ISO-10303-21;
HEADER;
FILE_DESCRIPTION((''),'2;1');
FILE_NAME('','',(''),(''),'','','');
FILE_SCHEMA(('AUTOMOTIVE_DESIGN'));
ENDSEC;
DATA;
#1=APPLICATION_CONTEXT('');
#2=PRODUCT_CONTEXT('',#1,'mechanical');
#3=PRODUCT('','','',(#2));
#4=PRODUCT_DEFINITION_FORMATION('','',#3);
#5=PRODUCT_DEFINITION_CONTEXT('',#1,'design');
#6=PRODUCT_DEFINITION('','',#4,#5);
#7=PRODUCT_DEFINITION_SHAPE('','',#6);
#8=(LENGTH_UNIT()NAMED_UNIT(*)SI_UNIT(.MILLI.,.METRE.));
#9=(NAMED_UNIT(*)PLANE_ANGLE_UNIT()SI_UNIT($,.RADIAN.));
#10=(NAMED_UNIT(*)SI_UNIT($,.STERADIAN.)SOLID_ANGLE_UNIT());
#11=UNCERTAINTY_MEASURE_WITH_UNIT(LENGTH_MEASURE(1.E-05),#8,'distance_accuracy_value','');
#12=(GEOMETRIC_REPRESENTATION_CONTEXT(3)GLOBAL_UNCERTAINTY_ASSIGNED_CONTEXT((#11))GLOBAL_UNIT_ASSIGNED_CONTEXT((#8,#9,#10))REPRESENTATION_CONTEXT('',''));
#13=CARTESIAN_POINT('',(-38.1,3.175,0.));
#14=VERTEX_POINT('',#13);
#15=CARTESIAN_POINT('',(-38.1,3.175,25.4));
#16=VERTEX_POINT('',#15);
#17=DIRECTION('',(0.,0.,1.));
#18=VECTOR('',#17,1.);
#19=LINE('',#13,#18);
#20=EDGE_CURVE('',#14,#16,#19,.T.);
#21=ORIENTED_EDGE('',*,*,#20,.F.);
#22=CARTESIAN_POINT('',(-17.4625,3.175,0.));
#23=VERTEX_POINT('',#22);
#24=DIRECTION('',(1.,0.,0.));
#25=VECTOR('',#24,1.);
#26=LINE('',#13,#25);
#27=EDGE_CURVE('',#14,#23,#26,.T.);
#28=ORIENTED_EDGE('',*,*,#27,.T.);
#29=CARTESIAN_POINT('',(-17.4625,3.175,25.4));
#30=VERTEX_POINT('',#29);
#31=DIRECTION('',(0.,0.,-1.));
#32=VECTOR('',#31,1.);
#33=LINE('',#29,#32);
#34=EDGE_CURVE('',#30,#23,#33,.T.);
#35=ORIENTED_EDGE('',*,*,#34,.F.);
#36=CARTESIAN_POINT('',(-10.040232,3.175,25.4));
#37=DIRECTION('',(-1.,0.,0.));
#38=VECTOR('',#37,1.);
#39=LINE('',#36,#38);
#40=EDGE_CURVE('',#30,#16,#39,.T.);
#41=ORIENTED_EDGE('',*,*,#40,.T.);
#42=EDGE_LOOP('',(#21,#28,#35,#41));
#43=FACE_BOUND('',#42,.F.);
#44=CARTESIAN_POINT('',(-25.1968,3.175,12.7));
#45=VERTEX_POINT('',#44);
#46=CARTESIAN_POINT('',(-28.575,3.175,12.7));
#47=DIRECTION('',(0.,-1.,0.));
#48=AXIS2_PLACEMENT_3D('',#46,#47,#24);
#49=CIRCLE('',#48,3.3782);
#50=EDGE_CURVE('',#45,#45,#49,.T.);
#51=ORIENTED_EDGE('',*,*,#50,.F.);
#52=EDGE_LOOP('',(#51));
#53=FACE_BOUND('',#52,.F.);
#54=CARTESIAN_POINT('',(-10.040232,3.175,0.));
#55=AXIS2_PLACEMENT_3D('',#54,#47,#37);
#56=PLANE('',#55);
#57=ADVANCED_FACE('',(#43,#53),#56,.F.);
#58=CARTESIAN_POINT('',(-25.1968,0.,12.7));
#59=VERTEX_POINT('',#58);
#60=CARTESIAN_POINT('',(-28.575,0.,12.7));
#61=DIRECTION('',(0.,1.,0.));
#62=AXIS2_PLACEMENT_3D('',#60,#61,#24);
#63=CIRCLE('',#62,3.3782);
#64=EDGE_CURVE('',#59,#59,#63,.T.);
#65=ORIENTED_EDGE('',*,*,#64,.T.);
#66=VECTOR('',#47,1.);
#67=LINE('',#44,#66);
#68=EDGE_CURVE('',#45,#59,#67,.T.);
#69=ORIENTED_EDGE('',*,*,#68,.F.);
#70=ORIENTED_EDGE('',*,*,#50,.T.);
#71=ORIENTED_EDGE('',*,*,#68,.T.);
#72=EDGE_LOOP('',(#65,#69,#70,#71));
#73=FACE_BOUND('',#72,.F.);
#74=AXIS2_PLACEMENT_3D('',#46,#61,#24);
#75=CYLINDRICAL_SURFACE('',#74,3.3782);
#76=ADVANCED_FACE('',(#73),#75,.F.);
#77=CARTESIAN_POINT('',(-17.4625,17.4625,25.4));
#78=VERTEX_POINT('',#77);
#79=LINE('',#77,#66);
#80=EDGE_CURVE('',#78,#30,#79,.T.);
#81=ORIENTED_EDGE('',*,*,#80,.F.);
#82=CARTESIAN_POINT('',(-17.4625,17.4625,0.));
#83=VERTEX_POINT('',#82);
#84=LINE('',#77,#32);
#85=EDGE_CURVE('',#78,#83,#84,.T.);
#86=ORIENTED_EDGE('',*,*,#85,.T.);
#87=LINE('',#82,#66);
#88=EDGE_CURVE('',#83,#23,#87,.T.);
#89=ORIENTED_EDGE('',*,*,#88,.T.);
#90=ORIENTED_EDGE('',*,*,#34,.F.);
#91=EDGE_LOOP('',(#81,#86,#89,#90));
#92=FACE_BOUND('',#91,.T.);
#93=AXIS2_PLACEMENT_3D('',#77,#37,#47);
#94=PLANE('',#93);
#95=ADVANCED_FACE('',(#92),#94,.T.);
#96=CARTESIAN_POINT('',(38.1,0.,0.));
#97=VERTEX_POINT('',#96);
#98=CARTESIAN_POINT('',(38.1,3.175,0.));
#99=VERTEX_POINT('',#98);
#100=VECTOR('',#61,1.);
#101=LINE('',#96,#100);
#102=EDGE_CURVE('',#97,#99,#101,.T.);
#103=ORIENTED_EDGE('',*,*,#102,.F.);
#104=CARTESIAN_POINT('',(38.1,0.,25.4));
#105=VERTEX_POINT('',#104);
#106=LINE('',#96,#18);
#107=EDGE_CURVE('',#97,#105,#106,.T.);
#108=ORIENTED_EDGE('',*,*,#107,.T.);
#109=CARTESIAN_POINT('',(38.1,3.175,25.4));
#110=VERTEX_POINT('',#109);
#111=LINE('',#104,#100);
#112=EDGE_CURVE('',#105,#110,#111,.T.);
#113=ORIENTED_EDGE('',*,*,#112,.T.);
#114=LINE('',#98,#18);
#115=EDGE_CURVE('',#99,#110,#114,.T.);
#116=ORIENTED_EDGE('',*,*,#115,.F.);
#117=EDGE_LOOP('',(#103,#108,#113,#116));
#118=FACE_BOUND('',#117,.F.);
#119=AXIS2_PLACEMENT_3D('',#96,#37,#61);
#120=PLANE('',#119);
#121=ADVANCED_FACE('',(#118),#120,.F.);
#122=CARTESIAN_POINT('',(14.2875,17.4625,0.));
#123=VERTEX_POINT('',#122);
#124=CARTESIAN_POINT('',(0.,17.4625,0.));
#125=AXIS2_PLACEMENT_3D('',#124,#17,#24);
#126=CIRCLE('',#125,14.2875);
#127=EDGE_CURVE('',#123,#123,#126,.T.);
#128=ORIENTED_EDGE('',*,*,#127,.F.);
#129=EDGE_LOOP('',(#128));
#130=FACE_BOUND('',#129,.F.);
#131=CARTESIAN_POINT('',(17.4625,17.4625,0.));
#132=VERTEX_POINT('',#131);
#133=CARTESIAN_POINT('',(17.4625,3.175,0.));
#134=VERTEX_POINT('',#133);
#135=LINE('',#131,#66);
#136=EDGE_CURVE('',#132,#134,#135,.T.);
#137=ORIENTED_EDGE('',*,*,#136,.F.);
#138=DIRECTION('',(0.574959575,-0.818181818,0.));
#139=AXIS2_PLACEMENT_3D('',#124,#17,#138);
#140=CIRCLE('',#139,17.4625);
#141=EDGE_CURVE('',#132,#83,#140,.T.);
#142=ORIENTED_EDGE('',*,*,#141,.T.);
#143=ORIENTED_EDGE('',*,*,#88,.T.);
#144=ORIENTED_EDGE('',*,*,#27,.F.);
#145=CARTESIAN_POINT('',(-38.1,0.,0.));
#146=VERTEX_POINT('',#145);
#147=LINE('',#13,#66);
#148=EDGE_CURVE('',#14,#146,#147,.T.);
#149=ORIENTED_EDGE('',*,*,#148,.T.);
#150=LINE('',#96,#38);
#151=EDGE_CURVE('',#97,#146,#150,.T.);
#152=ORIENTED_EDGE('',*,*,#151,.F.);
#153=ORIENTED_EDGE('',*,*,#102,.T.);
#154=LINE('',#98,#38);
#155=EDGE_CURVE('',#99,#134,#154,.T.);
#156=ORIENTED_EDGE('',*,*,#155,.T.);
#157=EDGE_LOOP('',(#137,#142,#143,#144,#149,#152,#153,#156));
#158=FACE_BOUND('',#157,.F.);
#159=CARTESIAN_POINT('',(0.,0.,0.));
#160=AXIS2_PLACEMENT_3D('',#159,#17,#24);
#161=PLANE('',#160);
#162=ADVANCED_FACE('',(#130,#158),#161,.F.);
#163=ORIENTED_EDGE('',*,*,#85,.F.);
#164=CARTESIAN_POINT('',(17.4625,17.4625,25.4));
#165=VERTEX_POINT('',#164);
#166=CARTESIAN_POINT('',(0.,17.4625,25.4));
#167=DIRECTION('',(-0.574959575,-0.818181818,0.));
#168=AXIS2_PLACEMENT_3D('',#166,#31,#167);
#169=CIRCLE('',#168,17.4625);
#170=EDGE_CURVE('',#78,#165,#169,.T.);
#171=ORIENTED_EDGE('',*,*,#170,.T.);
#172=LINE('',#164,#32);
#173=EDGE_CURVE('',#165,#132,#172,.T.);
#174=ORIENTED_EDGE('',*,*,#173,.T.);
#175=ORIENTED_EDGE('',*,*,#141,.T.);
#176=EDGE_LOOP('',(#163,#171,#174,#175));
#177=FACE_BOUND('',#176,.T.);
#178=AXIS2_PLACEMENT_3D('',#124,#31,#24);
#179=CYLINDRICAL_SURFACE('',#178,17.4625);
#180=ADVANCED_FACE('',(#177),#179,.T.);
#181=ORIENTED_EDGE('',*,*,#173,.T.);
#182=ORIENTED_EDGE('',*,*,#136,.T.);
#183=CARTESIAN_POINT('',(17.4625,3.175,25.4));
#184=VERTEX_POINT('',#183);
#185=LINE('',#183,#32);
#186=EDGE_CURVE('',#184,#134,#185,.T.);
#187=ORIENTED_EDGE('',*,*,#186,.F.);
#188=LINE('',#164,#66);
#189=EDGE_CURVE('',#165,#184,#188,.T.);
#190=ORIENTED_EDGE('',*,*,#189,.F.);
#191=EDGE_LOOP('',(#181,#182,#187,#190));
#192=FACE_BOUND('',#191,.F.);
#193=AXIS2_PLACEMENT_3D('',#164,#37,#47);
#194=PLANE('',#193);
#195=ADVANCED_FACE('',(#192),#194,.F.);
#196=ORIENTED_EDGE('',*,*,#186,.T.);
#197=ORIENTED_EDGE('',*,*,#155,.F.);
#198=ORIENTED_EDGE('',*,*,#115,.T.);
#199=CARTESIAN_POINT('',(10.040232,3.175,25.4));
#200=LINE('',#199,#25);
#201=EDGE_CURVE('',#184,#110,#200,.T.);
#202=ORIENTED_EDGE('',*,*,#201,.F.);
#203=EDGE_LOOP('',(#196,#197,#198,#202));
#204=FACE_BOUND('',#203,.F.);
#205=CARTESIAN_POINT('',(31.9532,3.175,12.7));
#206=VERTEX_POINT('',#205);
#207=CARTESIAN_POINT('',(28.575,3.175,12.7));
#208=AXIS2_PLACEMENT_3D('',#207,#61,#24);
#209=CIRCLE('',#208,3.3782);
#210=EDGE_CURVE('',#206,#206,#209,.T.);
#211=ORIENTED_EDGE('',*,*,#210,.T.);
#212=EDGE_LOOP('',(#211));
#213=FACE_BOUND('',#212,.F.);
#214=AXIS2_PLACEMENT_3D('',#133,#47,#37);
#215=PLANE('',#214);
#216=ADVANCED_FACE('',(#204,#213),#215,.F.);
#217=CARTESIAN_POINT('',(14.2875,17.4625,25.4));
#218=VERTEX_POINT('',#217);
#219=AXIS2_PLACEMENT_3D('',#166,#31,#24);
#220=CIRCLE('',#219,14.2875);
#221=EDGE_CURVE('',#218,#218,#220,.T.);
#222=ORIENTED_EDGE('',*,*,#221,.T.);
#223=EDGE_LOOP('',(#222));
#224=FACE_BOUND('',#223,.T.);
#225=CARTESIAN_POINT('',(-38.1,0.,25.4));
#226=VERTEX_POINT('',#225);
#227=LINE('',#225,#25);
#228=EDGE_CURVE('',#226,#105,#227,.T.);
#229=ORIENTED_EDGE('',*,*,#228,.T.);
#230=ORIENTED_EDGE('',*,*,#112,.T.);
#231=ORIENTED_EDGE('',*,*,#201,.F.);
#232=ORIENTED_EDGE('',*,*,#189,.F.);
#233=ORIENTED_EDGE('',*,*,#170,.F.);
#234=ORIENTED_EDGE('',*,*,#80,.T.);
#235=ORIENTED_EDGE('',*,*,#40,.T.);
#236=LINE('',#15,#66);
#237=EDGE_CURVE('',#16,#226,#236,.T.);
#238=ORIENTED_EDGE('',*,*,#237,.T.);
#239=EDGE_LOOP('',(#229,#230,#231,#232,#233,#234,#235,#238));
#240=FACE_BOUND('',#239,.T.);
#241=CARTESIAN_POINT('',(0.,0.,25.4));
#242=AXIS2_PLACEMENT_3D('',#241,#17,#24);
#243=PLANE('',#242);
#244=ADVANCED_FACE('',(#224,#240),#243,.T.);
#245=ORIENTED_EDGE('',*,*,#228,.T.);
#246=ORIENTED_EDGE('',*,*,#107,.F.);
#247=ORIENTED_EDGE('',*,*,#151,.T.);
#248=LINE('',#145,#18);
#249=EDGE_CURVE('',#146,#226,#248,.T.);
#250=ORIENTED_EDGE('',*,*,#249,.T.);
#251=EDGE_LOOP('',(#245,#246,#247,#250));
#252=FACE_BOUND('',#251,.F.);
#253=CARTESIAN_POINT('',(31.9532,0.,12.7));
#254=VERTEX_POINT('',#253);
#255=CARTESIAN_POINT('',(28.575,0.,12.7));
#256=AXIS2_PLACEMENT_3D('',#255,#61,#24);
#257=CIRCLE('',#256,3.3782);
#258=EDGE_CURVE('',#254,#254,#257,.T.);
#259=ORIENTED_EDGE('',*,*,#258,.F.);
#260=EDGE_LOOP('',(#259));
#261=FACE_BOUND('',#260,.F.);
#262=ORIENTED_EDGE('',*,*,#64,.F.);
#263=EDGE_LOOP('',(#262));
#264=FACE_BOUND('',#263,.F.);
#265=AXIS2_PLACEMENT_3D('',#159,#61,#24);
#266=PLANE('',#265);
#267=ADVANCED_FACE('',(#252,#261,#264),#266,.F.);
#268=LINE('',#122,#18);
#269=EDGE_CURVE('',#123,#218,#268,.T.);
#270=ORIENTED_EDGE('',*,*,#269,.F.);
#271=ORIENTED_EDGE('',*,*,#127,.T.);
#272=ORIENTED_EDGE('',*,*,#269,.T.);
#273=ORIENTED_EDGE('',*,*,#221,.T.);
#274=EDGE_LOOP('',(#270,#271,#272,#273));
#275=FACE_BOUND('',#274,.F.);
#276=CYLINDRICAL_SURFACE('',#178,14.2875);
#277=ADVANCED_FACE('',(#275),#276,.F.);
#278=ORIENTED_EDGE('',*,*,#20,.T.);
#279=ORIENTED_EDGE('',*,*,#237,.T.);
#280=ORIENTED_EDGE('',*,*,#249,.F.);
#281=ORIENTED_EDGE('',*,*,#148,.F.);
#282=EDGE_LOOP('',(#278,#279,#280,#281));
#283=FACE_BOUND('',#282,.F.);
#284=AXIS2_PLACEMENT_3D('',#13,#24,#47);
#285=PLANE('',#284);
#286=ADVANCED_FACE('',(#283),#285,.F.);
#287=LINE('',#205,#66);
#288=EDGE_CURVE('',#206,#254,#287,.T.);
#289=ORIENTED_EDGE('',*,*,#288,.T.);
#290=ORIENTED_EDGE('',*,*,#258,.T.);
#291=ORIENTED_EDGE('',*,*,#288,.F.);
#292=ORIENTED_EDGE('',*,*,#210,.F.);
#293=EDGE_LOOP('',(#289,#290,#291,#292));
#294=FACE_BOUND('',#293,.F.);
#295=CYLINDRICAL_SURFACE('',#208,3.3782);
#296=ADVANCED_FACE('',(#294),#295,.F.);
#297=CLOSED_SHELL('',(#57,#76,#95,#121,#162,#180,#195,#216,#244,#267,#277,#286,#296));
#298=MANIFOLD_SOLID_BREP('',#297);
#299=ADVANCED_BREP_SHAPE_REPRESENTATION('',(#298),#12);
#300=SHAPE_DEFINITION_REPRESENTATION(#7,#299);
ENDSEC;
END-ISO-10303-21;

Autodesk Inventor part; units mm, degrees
ref_plane "YZ Plane" through (0, 0, 0) normal (1, 0, 0) x (0, 1, 0)
ref_plane "XZ Plane" through (0, 0, 0) normal (0, 1, 0) x (-1, 0, 0)
ref_plane "XY Plane" through (0, 0, 0) normal (0, 0, 1) x (1, 0, 0)
sketch "Sketch1" plane through (0, 0, 0) normal (0, 0, 1) x (1, 0, 0)
  line L0 (0, 0) -> (-38.1, 0)
  line L1 (0, 0) -> (38.1, 0)
  line L2 (38.1, 0) -> (38.1, 3.175)
  line L3 (38.1, 3.175) -> (-38.1, 3.175)
  line L4 (-38.1, 3.175) -> (-38.1, 0)
  line L5 (0, 0) -> (0, 17.4625)
  circle A0 centre (0, 17.4625) radius 14.2875
  arc A1 (0, 0) -> (0, 0) centre (0, 17.4625) ccw
  circle A2 centre (0, 17.4625) radius 17.4625
  line L6 (-17.4625, 17.4625) -> (-17.4625, 3.175)
  line L7 (17.4625, 17.4625) -> (17.4625, 3.175)
  dimension "d0" = 38.1
  dimension "d1" = 38.1
  dimension "d2" = 3.175
  dimension "d3" = 17.4625
  dimension "d4" = 28.575
  dimension "d16" = 3.175
extrude "Extrusion1" add sketch "Sketch1" along normal blind 25.4 contours A1 L3 L2 L1 | A1 L3 L5 | L0 L4 L3 A1 | L5 L3 A1 | L3 A1
sketch "Sketch2" plane through (19.05, 3.175, 0) normal (0, 1, 0) x (1, 0, 0)
  line L0 (19.05, 0) -> (19.05, -25.4) projected
  line L1 (19.05, -12.7) -> (9.525, -12.7)
  circle A0 centre (9.525, -12.7) radius 3.3782
  line L2 (-57.15, 0) -> (-57.15, -25.4) projected
  line L3 (-38.1, 0) -> (-38.1, -25.4) projected
  line L4 (-57.15, -12.7) -> (-47.625, -12.7)
  circle A1 centre (-47.625, -12.7) radius 3.3782
  point P0 (-19.05, 0)
  dimension "d8" = 6.7564
  dimension "d13" = 9.525
  dimension "d14" = 6.7564
  dimension "d15" = 9.525
extrude "Extrusion2" cut sketch "Sketch2" against normal blind 25.4
sketch "Sketch3" plane through (0, 0, 25.4) normal (0, 0, 1) x (1, 0, 0)
  line L0 (38.1, 3.175) -> (10.0402, 3.175) projected
  arc A0 (10.0402, 3.175) -> (-10.0402, 3.175) centre (0, 17.4625) ccw projected
  line L1 (-10.0402, 3.175) -> (-38.1, 3.175) projected
  line L2 (-17.4625, 17.4625) -> (-17.4625, 3.175)
  line L3 (17.4625, 17.4625) -> (17.4625, 3.175)
  point P0 (0, 0)
extrude "Extrusion3" add sketch "Sketch3" against normal blind 25.4
properties part number "p80 bearing mount" material "Aluminum 6061"
